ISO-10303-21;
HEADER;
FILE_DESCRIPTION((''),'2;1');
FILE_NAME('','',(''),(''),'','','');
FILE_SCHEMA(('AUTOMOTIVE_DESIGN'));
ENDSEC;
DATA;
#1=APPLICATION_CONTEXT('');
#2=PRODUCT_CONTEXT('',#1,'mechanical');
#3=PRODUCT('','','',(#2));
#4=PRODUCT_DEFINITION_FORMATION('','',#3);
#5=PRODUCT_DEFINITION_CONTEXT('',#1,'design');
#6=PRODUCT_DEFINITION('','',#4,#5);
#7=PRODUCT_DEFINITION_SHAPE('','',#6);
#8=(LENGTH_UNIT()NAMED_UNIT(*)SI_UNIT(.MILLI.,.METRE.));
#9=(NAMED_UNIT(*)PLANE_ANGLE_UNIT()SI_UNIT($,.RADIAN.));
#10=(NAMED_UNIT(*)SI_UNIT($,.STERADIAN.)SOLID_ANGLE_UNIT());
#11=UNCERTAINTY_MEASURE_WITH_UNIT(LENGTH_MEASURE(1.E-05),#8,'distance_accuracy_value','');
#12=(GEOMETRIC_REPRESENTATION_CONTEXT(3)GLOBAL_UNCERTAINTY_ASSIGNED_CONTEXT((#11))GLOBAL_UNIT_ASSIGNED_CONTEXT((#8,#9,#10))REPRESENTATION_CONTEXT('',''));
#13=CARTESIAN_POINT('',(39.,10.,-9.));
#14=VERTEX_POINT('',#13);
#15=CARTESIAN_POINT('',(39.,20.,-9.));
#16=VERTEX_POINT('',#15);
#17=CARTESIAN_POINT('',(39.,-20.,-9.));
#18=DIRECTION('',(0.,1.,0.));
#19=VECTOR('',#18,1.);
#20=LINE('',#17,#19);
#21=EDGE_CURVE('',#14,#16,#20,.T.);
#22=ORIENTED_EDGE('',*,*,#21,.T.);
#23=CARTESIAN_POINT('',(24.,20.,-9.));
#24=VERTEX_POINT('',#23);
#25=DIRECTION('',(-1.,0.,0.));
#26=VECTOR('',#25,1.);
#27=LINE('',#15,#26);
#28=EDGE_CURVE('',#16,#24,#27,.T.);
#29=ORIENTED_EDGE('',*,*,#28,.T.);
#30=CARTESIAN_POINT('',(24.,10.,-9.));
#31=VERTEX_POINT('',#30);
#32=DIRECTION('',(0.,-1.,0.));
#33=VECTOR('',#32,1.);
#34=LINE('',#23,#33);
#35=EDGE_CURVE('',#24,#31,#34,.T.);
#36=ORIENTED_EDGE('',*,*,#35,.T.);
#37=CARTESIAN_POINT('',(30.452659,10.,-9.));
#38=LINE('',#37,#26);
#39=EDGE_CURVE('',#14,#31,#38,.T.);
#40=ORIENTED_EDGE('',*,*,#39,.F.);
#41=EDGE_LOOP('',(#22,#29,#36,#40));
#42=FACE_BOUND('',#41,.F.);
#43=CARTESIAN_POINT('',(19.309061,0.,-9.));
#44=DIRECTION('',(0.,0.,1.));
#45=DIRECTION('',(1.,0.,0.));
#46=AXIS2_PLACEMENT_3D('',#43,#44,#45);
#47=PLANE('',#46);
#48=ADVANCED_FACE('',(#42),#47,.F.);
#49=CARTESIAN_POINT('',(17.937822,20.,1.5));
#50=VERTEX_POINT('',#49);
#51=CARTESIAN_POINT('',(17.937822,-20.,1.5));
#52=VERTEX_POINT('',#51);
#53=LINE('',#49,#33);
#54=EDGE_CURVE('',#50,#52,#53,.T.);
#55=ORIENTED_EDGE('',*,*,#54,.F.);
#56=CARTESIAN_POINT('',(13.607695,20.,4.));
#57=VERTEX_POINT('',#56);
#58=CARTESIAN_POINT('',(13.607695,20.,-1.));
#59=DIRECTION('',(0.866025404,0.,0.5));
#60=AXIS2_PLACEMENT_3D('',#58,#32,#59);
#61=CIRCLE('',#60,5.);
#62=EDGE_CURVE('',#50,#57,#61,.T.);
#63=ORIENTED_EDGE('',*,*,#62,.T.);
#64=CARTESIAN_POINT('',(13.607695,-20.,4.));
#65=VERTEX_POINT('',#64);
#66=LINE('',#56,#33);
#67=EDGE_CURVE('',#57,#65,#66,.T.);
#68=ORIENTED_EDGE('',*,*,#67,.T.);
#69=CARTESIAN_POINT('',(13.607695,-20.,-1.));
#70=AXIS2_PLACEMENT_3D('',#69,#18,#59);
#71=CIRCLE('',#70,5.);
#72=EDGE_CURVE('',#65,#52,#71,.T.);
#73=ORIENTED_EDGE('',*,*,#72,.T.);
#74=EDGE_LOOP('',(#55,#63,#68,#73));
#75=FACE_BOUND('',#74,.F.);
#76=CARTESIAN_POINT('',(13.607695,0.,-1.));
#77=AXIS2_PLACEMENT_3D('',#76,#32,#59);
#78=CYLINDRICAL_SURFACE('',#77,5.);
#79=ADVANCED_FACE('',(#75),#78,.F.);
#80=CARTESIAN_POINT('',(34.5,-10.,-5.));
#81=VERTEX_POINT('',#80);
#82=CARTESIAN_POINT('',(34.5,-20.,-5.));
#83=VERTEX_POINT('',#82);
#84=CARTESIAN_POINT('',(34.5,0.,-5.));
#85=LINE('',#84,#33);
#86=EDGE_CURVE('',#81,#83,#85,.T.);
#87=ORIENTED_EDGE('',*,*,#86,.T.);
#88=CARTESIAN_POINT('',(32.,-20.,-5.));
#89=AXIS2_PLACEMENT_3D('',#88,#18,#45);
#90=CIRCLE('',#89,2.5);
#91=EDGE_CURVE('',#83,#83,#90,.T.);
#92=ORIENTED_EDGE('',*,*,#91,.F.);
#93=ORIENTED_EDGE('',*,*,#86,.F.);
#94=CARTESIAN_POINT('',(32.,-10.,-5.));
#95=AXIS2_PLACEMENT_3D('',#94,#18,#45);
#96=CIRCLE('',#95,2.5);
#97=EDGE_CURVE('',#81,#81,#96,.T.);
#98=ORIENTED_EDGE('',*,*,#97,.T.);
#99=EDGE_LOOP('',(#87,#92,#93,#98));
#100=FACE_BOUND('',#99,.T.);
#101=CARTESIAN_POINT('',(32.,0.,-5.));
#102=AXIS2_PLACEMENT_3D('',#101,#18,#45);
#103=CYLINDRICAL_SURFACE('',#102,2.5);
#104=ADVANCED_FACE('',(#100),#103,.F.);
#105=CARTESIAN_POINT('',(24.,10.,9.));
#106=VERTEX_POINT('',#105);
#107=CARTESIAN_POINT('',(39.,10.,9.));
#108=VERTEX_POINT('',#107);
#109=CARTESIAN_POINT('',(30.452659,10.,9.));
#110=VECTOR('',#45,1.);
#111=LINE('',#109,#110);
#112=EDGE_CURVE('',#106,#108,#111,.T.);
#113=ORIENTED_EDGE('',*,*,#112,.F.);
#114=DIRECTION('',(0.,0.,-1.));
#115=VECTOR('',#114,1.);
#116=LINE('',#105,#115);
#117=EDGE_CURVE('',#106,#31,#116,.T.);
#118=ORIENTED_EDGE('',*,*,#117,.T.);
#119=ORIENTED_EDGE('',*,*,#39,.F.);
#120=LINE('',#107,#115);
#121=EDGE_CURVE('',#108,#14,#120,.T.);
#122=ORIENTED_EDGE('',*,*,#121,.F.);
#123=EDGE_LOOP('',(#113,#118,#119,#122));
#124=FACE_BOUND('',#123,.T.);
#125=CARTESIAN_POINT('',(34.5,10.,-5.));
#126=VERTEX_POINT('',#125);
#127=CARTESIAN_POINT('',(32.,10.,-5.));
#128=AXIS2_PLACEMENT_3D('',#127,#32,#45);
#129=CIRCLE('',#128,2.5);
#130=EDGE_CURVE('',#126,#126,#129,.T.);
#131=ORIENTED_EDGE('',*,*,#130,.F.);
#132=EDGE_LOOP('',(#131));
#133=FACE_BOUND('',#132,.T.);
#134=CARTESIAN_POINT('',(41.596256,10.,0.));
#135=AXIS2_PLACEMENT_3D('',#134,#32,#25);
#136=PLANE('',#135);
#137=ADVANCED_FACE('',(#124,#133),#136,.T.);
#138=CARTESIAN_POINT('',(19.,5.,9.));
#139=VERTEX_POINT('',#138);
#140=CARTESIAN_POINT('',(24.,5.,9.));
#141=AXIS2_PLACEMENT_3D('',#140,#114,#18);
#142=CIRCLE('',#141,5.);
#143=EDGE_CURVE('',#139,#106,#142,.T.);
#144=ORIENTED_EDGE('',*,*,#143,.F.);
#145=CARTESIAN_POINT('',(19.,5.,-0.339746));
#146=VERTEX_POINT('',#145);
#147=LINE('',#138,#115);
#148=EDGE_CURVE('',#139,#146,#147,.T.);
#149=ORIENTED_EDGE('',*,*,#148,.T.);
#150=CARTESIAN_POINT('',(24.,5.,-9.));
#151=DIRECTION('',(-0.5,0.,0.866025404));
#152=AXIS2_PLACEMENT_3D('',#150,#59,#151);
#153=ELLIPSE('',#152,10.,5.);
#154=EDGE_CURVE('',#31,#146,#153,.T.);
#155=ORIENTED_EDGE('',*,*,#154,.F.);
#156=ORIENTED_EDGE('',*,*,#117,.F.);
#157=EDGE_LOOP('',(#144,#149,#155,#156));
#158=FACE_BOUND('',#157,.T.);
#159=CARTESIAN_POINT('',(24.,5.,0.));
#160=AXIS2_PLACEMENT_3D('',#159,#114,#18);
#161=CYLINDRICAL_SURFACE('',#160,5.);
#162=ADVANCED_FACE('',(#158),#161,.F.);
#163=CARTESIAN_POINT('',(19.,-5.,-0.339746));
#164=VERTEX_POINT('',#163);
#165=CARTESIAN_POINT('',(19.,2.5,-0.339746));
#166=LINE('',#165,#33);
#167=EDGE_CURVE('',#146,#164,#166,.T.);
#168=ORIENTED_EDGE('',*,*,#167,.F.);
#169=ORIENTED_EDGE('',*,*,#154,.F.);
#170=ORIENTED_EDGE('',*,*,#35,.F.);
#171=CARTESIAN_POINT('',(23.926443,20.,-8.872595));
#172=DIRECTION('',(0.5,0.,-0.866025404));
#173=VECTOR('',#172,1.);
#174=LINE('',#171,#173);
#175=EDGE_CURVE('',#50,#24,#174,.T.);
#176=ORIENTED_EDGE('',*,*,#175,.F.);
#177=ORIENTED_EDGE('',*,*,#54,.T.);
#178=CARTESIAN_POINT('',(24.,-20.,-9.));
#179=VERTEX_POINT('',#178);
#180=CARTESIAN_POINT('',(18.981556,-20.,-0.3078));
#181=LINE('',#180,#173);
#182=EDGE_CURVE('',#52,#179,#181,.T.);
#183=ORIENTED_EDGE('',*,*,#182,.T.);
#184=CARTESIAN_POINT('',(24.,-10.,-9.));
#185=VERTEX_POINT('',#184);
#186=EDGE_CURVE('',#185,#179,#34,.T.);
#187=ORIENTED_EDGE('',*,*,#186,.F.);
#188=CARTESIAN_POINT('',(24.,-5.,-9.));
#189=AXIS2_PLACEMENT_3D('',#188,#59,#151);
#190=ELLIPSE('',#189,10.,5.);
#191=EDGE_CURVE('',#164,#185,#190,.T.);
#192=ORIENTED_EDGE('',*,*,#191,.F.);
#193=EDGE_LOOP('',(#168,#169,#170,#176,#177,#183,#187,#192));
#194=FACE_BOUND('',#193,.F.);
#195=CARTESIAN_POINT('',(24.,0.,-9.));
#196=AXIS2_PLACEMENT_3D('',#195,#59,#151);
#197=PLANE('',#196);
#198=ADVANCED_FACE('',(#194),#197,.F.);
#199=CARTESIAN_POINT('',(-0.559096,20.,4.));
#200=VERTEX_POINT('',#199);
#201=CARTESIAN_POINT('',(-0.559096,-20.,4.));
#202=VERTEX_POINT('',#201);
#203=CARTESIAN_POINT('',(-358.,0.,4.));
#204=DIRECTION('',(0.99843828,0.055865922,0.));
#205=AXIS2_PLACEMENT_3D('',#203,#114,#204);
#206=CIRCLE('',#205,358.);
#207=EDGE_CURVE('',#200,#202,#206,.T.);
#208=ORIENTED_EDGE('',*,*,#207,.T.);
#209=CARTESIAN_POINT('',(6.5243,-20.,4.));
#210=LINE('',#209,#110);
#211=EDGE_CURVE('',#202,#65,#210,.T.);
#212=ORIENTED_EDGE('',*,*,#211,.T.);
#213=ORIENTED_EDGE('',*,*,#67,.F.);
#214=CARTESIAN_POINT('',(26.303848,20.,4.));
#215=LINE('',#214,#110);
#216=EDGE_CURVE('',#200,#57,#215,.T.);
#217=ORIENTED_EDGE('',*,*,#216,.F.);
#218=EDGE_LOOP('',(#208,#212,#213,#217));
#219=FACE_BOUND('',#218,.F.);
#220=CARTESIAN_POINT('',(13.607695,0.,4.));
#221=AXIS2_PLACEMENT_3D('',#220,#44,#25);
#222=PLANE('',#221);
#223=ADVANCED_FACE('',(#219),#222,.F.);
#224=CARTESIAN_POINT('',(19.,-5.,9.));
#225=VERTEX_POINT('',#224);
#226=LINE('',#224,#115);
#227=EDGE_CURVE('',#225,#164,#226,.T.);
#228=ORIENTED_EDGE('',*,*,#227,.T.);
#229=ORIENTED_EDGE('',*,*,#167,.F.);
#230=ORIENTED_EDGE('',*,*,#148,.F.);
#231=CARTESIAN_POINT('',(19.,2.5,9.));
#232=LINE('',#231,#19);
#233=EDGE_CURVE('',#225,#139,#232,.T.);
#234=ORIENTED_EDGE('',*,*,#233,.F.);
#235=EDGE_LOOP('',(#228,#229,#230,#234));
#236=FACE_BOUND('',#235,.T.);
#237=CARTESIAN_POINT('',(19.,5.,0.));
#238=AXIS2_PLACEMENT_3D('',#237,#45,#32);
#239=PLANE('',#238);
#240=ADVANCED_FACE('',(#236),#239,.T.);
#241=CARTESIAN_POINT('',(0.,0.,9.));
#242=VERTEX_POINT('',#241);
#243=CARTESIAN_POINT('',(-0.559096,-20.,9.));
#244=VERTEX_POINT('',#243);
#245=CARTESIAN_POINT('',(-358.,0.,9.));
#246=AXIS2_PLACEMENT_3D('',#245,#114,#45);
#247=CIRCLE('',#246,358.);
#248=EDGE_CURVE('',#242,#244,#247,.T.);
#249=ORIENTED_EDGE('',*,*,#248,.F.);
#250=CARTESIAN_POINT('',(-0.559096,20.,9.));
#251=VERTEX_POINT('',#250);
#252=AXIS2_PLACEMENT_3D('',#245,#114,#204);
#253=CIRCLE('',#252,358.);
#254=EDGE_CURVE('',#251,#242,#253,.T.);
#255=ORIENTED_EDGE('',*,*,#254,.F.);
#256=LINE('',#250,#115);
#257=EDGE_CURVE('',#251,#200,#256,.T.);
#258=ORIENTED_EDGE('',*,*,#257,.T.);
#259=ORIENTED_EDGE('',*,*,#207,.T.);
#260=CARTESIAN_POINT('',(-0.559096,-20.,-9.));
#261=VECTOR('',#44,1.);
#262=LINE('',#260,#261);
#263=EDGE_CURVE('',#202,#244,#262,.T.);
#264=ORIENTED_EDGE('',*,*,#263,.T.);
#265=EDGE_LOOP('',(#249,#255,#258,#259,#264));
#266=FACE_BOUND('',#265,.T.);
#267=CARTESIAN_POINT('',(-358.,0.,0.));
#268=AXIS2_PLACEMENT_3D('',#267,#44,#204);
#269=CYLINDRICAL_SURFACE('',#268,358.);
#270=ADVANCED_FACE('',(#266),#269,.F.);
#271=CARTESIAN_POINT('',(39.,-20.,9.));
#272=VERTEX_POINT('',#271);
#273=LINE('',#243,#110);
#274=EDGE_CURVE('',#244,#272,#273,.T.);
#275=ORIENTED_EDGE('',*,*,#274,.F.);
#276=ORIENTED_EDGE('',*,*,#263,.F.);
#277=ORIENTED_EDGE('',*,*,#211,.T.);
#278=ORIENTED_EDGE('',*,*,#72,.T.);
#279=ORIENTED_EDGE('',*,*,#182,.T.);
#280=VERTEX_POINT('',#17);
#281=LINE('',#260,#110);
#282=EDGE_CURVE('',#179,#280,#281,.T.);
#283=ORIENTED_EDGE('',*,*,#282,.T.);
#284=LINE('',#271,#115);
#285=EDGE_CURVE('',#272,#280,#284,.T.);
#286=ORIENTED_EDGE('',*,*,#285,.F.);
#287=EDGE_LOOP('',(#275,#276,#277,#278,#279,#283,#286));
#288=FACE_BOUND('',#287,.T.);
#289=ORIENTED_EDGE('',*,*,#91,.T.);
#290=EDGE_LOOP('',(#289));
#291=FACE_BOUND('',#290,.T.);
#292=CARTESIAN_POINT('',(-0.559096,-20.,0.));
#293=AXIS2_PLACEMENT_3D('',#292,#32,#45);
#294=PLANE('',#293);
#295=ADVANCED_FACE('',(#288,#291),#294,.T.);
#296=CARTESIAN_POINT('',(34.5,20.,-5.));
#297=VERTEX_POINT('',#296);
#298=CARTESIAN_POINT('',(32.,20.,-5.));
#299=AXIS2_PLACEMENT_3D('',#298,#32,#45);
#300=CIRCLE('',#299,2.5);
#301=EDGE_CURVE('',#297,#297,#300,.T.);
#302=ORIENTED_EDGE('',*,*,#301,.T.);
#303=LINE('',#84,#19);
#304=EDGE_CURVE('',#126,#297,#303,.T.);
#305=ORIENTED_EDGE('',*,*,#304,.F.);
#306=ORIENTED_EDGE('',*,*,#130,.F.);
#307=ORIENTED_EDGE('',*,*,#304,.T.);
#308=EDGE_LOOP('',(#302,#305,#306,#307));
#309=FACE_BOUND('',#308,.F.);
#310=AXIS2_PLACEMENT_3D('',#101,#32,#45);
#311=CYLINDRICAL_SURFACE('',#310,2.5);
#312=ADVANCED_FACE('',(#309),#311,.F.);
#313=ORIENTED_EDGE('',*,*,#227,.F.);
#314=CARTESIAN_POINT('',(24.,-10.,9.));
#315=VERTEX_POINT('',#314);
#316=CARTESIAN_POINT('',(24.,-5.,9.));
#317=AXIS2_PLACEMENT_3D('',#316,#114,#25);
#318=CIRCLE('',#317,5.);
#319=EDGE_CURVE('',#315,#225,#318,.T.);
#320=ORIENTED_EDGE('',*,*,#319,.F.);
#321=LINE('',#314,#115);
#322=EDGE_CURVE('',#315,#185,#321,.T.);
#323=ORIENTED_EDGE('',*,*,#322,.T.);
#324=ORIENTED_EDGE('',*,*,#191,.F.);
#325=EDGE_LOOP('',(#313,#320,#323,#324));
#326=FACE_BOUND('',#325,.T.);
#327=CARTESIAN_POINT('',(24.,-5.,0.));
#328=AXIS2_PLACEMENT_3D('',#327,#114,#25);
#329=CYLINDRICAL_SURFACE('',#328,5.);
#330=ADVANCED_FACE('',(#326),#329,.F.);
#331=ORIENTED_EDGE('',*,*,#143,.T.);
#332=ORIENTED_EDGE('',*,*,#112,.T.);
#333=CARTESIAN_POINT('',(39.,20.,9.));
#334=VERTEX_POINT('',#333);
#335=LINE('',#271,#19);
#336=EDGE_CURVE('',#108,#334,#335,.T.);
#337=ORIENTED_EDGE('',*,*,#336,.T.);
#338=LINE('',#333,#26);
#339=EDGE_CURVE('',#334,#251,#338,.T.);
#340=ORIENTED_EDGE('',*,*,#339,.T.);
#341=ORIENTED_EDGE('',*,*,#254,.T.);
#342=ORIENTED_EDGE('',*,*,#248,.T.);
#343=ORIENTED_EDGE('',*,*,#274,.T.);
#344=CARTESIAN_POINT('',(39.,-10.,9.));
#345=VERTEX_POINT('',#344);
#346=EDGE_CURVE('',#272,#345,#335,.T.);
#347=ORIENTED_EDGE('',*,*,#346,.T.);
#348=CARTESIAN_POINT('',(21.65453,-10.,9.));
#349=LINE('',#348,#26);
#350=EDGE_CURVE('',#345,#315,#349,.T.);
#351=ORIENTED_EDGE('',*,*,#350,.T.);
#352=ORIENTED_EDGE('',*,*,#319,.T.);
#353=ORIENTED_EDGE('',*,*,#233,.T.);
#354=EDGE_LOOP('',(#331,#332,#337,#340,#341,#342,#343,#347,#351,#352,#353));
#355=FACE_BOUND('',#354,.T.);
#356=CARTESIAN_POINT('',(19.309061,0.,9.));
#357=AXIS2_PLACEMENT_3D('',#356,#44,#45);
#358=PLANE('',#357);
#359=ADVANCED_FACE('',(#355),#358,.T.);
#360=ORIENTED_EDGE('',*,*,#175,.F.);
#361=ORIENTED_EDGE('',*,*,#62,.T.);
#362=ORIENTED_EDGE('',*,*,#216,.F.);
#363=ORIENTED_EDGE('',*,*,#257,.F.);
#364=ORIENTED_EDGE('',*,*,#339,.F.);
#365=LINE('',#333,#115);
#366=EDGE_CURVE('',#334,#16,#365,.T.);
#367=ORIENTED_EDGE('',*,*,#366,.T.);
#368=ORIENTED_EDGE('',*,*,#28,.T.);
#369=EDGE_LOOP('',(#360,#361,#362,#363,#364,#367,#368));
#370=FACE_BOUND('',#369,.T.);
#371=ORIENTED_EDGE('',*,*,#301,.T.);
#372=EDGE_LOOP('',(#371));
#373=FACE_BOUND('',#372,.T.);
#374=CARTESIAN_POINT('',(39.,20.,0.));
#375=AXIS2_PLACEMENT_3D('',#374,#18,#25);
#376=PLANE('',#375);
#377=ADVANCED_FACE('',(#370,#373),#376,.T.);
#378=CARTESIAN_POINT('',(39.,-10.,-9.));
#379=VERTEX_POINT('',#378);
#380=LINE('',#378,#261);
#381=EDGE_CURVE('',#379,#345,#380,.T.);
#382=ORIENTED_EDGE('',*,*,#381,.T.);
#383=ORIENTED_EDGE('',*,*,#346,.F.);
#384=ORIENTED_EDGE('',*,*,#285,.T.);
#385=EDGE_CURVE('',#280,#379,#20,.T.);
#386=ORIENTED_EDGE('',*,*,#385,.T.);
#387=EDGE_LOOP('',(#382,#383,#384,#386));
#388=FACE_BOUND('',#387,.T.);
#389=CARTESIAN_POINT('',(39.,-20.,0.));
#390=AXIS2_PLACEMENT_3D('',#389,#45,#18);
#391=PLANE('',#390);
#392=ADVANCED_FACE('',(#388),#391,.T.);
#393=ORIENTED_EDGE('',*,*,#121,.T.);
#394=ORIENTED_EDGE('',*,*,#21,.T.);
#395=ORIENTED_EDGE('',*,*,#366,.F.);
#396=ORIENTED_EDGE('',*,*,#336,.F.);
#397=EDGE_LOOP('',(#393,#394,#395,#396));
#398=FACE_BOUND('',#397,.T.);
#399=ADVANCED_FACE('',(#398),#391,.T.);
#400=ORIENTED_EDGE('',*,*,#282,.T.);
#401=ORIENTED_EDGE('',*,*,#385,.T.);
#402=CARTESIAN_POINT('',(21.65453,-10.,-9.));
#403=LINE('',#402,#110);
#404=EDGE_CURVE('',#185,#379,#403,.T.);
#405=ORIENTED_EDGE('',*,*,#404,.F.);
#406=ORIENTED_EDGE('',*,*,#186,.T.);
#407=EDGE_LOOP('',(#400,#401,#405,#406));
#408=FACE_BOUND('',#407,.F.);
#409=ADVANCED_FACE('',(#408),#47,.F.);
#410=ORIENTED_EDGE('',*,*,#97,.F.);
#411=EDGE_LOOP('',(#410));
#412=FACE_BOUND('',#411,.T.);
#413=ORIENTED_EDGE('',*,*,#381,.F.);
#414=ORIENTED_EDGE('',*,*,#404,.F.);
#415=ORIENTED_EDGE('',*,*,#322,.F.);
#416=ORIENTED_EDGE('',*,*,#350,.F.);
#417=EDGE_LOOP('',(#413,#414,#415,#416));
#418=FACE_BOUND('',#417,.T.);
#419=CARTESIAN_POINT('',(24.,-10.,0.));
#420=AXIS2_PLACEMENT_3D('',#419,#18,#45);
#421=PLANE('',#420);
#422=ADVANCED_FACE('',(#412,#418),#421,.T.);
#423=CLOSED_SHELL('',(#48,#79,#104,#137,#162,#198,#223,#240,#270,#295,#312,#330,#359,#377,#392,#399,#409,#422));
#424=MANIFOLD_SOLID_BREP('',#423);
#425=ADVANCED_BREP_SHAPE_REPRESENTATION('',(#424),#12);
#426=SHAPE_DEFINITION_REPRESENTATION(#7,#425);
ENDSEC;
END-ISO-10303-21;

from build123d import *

# Parameters (mm, degrees)
F1_DEPTH      = 9
F1_DEPTH_BACK = 9
F3_DEPTH      = 25
F3_DEPTH_BACK = 25
F5_DEPTH      = 25
F5_DEPTH_BACK = 25
F6_R          = 2.5
F7_DEPTH      = 25
F7_DEPTH_BACK = 25


with BuildPart() as f1:
    # F0 (on Top) → F1 (new body, two sides)
    with BuildSketch(Plane.XY) as f1_sk:
        with BuildLine():
            ThreePointArc((-0.5590957934, 20), (-0.139801245, 10.0039065883), (0, 0))
            ThreePointArc((0, 0), (-0.139801245, -10.0039065883), (-0.5590957934, -20))
            Line((-0.5590957934, -20), (39, -20))
            Line((39, -20), (39, 20))
            Line((39, 20), (-0.5590957934, 20))
        make_face()
    extrude(amount=F1_DEPTH)
    extrude(f1_sk.sketch, amount=-F1_DEPTH_BACK)

    # F2 (on Front) → F3 (cut, two sides)
    with BuildSketch(Plane.XZ) as f3_sk:
        with BuildLine():
            Line((-2.6374068111, -9), (24, -9))
            Line((24, -9), (17.9378221735, 1.5))
            ThreePointArc((17.9378221735, 1.5), (16.1076951546, 3.3301270189), (13.6076951546, 4))
            Line((13.6076951546, 4), (-2.6374068111, 4))
            Line((-2.6374068111, 4), (-2.6374068111, -9))
        make_face()
    extrude(amount=-F3_DEPTH, mode=Mode.SUBTRACT)
    extrude(f3_sk.sketch, amount=F3_DEPTH_BACK, mode=Mode.SUBTRACT)

    # F4 (on Top) → F5 (cut, two sides)
    with BuildSketch(Plane.XY) as f5_sk:
        with BuildLine():
            ThreePointArc((19, -5), (20.4644660941, -8.5355339059), (24, -10))
            Line((24, -10), (41.5962561965, -10))
            Line((41.5962561965, -10), (41.5962561965, 10))
            Line((41.5962561965, 10), (24, 10))
            ThreePointArc((24, 10), (20.4644660941, 8.5355339059), (19, 5))
            Line((19, 5), (19, 0))
            Line((19, 0), (19, -5))
        make_face()
    extrude(amount=-F5_DEPTH, mode=Mode.SUBTRACT)
    extrude(f5_sk.sketch, amount=F5_DEPTH_BACK, mode=Mode.SUBTRACT)

    # F6 (on Front) → F7 (cut, two sides)
    with BuildSketch(Plane.XZ) as f7_sk:
        with Locations((32, -5)):
            Circle(F6_R)
    extrude(amount=-F7_DEPTH, mode=Mode.SUBTRACT)
    extrude(f7_sk.sketch, amount=F7_DEPTH_BACK, mode=Mode.SUBTRACT)


solid = f1.part
